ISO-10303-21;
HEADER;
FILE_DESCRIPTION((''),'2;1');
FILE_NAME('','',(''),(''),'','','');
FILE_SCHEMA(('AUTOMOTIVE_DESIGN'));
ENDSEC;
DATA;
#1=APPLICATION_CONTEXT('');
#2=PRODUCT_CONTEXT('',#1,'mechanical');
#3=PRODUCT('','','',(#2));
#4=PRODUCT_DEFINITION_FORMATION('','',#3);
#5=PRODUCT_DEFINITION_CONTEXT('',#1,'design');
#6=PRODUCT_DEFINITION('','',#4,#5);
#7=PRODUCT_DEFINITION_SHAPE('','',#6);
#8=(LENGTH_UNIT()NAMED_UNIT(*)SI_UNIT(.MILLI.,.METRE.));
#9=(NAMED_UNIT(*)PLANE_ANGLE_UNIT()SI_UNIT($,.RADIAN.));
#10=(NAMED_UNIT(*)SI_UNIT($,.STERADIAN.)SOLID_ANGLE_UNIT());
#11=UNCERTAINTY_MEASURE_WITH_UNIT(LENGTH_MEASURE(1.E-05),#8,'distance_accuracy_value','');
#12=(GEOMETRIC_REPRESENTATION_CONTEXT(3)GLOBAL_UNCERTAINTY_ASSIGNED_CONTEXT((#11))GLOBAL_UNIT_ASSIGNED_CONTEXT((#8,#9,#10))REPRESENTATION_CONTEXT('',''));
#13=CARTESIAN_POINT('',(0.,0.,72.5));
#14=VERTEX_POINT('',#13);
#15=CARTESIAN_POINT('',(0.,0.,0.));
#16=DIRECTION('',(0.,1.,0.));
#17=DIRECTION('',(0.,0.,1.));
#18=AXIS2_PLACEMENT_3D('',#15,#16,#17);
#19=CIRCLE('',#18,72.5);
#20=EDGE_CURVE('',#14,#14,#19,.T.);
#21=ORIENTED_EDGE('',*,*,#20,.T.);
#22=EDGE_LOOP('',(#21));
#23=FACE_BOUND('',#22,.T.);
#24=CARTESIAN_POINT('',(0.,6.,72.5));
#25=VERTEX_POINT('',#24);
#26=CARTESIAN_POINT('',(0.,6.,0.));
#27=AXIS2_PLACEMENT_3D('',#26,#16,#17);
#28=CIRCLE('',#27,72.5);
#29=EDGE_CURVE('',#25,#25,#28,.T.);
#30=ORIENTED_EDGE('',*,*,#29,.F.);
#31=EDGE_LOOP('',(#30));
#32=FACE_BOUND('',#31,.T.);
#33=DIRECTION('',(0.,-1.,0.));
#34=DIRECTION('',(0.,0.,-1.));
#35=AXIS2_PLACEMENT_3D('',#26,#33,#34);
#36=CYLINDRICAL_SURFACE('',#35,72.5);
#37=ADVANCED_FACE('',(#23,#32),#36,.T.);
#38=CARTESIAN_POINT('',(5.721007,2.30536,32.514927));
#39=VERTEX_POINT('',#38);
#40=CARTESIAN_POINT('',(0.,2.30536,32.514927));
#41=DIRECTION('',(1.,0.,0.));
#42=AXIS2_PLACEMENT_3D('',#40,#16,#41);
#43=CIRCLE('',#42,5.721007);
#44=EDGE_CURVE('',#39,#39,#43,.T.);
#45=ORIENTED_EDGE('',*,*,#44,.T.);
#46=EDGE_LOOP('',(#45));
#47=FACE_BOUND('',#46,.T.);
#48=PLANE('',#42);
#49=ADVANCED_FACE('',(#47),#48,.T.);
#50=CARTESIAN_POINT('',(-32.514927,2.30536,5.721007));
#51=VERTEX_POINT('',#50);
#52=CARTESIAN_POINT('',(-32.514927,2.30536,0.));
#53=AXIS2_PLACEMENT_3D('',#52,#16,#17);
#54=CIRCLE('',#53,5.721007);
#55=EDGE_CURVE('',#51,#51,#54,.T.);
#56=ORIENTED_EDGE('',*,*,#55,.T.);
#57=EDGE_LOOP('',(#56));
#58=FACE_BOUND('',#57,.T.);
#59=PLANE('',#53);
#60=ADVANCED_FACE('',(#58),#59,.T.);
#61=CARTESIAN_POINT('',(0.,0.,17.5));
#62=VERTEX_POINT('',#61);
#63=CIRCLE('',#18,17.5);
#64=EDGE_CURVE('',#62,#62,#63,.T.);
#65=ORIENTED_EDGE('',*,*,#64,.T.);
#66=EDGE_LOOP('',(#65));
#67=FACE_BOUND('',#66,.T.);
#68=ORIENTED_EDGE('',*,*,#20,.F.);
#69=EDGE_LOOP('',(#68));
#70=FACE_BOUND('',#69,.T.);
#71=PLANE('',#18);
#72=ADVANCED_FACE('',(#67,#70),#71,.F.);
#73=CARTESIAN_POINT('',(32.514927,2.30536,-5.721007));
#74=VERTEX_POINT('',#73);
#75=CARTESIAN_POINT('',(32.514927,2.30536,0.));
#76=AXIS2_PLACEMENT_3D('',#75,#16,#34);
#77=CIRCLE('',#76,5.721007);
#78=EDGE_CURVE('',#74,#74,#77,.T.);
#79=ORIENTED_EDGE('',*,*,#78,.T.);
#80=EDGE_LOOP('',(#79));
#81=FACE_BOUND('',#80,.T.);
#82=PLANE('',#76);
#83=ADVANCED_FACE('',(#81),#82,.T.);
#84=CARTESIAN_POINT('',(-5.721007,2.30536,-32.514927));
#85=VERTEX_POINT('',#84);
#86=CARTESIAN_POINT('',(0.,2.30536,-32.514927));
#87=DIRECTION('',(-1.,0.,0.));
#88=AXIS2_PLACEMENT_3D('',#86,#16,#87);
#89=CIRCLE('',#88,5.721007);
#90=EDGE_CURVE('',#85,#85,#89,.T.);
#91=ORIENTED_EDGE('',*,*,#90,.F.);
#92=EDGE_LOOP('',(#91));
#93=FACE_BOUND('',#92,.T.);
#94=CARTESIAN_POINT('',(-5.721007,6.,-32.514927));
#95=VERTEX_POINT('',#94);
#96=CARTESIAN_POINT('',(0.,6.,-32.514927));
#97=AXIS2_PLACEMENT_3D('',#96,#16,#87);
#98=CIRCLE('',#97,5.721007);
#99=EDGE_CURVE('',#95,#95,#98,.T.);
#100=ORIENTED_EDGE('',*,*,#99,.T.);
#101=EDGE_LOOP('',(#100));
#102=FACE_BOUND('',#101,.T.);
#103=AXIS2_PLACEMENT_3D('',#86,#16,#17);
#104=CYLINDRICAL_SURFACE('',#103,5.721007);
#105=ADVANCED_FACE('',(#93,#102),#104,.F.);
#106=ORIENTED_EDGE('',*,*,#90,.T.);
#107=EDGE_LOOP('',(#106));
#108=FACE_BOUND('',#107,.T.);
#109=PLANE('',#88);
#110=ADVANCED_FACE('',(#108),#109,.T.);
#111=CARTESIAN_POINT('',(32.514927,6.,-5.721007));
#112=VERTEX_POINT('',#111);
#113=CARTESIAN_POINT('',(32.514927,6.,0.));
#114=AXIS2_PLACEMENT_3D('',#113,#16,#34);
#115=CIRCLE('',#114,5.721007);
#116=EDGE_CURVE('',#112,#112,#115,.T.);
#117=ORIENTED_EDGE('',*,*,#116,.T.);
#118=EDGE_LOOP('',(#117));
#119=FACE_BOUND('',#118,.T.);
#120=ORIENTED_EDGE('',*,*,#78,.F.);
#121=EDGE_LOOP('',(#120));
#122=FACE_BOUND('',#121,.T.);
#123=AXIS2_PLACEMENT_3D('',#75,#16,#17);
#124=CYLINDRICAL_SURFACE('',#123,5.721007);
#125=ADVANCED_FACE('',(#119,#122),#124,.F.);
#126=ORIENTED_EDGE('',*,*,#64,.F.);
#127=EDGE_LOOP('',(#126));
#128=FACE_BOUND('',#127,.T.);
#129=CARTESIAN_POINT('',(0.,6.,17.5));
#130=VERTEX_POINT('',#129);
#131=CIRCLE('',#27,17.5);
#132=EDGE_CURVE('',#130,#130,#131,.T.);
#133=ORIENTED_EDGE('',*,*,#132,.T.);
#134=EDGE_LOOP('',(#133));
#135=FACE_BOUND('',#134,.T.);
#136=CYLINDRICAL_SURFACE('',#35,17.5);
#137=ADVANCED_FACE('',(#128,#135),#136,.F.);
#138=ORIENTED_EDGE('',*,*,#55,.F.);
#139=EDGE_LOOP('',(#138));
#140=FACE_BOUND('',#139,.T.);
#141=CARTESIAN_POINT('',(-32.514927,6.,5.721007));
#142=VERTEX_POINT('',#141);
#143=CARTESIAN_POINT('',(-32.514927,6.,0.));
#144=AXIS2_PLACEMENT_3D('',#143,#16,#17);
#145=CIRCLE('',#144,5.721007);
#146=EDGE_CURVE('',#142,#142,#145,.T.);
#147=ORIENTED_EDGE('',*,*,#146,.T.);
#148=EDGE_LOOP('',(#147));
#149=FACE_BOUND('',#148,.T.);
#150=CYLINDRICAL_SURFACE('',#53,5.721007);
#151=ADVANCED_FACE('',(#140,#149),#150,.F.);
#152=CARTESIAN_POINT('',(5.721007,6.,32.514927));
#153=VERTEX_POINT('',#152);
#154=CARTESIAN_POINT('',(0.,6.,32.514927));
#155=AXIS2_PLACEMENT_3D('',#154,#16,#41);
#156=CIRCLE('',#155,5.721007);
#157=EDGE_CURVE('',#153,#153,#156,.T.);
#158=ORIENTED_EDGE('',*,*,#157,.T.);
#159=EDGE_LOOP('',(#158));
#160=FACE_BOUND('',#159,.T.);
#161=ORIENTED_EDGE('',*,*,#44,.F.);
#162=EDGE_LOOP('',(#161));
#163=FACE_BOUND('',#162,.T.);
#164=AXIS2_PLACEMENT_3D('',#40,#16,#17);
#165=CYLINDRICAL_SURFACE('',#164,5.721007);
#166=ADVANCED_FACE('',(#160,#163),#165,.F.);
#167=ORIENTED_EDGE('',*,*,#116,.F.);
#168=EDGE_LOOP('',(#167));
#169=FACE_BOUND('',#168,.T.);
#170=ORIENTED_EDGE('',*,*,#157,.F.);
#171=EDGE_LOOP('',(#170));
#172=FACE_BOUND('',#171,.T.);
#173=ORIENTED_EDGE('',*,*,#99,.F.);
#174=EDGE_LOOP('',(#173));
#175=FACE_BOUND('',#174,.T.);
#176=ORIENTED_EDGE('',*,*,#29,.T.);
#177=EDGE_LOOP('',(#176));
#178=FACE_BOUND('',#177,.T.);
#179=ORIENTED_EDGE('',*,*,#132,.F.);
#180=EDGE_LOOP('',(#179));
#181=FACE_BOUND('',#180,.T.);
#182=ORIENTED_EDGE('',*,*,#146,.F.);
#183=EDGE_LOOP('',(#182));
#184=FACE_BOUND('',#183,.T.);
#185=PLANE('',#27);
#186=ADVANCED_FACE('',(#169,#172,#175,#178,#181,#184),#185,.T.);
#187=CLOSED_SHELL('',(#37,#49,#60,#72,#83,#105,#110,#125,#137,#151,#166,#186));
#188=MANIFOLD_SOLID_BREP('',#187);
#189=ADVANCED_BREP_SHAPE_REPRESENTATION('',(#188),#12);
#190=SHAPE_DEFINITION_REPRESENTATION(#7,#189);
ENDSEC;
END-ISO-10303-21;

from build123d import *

# Parameters (mm, degrees)
SKETCH1_R           = 72.5
BOSS_EXTRUDE1_DEPTH = 6
SKETCH2_R           = 17.5
CUT_EXTRUDE1_DEPTH  = 103.705890776
SKETCH3_R           = 5.721006682
CUT_EXTRUDE2_DEPTH  = 3.694640352
CIRPATTERN1_COUNT   = 4


with BuildPart() as part:
    # Sketch1 → Boss-Extrude1 (new body)
    with BuildSketch(Plane(origin=(0, 0, 0), x_dir=(1, 0, 0), z_dir=(0, 1, 0))):
        Circle(SKETCH1_R)
    extrude(amount=BOSS_EXTRUDE1_DEPTH)

    # Sketch2 → Cut-Extrude1 (cut, through all)
    with BuildSketch(Plane(origin=(0, 0, 0), x_dir=(1, 0, 0), z_dir=(0, 1, 0))):
        Circle(SKETCH2_R)
    extrude(amount=CUT_EXTRUDE1_DEPTH, mode=Mode.SUBTRACT)

    # Sketch3 → Cut-Extrude2 (cut)
    with BuildSketch(Plane(origin=(0, 6, 0), x_dir=(1, 0, 0), z_dir=(0, 1, 0))):
        with Locations((-32.5149274, 0)):
            Circle(SKETCH3_R)
    cut_extrude2 = extrude(amount=-CUT_EXTRUDE2_DEPTH, mode=Mode.SUBTRACT)

    # CirPattern1: Cut-Extrude2 ×4 about axis
    cirpattern1_axis = Axis((0, 0, 0), (0, 1, 0))
    for i in range(1, CIRPATTERN1_COUNT):
        add(cut_extrude2.rotate(cirpattern1_axis, i * 360 / CIRPATTERN1_COUNT), mode=Mode.SUBTRACT)


solid = part.part
